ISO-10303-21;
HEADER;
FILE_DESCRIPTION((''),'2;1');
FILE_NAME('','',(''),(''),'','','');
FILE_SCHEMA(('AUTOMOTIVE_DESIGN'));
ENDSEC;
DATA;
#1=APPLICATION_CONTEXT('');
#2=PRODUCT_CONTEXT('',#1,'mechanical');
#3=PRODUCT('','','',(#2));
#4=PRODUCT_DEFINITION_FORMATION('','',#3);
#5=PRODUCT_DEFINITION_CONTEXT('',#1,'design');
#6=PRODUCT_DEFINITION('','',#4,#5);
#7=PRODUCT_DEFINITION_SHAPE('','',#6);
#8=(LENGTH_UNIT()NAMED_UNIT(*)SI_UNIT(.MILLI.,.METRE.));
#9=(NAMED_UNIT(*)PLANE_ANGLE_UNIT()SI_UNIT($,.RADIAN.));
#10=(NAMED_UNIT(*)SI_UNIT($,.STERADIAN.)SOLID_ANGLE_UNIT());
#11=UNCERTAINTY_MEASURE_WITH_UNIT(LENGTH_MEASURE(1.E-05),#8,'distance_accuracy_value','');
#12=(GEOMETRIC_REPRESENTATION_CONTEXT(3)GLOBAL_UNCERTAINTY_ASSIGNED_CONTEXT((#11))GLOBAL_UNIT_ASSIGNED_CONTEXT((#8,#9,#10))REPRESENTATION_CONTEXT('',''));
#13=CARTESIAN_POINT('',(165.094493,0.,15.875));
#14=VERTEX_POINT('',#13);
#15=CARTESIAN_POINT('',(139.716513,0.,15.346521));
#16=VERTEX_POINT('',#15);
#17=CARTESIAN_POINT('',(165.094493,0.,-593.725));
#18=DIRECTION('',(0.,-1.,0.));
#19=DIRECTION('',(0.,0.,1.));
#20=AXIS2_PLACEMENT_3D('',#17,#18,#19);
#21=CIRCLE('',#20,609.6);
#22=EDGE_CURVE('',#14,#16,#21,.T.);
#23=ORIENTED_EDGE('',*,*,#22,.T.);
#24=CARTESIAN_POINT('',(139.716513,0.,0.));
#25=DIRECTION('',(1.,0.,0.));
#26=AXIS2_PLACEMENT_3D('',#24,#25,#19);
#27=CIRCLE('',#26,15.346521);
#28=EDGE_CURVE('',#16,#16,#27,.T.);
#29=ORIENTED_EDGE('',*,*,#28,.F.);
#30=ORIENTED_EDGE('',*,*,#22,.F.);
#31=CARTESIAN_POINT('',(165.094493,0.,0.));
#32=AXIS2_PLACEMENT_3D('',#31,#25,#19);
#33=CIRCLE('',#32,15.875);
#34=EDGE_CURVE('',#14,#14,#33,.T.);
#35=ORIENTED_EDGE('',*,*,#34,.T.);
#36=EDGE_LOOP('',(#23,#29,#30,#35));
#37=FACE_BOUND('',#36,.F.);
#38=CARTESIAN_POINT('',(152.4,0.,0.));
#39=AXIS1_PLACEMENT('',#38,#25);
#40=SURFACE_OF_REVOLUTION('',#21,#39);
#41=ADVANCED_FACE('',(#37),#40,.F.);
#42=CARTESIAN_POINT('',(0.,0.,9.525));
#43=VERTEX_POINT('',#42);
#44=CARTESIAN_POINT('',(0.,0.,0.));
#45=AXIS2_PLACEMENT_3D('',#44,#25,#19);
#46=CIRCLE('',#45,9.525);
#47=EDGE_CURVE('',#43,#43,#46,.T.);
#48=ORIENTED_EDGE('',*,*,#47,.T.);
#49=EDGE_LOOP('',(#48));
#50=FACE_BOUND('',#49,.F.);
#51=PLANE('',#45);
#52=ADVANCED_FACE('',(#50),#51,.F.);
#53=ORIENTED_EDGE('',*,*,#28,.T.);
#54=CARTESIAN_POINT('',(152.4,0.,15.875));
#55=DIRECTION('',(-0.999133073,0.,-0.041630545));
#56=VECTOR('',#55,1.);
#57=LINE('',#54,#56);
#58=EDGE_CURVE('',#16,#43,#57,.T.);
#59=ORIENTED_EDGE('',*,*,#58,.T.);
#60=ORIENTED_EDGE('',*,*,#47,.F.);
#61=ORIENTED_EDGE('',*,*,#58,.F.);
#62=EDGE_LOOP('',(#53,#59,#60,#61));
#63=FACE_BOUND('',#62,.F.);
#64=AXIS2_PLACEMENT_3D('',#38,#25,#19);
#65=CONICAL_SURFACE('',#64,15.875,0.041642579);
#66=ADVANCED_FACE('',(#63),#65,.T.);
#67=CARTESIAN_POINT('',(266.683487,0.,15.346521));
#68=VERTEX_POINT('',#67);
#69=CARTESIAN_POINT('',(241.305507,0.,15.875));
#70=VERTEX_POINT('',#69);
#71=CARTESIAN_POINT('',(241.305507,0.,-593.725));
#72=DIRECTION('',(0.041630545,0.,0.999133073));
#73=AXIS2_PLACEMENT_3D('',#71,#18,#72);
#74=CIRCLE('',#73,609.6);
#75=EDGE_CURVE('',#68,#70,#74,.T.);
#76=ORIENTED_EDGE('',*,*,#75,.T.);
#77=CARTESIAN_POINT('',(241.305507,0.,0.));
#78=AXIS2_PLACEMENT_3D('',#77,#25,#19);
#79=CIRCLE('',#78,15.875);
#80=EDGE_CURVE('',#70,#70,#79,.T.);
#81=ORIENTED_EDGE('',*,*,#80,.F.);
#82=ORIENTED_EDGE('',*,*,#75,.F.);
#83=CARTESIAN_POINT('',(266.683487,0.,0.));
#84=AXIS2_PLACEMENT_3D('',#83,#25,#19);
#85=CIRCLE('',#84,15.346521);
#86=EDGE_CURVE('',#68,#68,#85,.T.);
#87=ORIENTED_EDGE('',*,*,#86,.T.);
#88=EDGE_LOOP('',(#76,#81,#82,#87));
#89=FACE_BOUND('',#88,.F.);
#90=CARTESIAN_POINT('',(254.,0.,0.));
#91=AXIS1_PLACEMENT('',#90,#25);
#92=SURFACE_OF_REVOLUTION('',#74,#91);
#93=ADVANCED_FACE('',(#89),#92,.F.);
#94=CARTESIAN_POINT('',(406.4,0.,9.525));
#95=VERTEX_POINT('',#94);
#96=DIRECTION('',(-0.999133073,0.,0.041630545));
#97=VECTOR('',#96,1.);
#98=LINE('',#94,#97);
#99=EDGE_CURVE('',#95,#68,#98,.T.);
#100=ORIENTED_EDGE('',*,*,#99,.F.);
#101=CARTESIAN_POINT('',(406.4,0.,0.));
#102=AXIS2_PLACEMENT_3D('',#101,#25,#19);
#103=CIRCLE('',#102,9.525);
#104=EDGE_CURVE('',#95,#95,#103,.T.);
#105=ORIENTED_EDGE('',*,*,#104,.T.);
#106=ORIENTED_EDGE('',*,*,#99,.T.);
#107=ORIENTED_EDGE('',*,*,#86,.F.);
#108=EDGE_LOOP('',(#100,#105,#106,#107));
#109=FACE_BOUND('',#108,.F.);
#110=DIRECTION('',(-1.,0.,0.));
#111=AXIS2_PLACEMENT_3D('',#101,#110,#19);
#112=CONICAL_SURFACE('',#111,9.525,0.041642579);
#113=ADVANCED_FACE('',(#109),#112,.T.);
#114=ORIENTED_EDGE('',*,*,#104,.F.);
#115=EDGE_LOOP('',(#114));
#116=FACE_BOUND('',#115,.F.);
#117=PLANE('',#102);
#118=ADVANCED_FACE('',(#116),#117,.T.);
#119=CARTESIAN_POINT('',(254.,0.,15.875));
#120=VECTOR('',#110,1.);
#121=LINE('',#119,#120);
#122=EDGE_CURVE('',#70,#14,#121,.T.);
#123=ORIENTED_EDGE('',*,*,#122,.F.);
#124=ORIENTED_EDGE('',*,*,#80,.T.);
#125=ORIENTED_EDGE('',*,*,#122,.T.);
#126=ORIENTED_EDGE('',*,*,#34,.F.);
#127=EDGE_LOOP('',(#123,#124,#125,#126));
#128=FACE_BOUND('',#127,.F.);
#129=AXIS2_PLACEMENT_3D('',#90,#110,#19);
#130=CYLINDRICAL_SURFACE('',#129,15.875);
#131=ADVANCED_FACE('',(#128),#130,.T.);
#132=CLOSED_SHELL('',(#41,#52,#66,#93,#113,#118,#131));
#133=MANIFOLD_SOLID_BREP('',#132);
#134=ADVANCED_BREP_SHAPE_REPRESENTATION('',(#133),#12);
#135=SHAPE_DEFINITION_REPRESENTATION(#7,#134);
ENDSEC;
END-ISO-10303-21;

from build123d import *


# Not quite as in the source:
# - a fillet or chamfer that OpenCascade refuses, or shapes differently, is made with other operations: its cross-section is extruded or revolved along the edge and cut away or added


with BuildPart() as f1:
    # F0 (on Front) → F1 (revolve)
    with BuildSketch(Plane.XZ):
        Polygon((0, 9.525), (0, 0), (406.4, 0), (406.4, 9.525), (254, 15.875), (152.4, 15.875), align=None)
    revolve(axis=Axis((203.2, 0, 0), (1, 0, 0)))

    # F2: fillet of radius 609.6 on 2 edges, made by hand

    # F2_s1 → F2_t2 (revolve, cut)
    with BuildSketch(Plane.XZ):
        with BuildLine():
            ThreePointArc((165.0944926269, 15.875), (152.4027515975, 15.7428660189), (139.7165125703, 15.3465213571))
            Line((139.7165125703, 15.3465213571), (152.4, 15.875))
            Line((152.4, 15.875), (165.0944926269, 15.875))
        make_face()
    revolve(axis=Axis((152.4, 0, 0), (1, 0, 0)), mode=Mode.SUBTRACT)

    # F2_s3 → F2_t4 (revolve, cut)
    with BuildSketch(Plane.XZ):
        with BuildLine():
            ThreePointArc((266.6834874297, 15.3465213571), (253.9972484025, 15.7428660189), (241.3055073731, 15.875))
            Line((241.3055073731, 15.875), (254, 15.875))
            Line((254, 15.875), (266.6834874297, 15.3465213571))
        make_face()
    revolve(axis=Axis((254, 0, 0), (1, 0, 0)), mode=Mode.SUBTRACT)


solid = f1.part
